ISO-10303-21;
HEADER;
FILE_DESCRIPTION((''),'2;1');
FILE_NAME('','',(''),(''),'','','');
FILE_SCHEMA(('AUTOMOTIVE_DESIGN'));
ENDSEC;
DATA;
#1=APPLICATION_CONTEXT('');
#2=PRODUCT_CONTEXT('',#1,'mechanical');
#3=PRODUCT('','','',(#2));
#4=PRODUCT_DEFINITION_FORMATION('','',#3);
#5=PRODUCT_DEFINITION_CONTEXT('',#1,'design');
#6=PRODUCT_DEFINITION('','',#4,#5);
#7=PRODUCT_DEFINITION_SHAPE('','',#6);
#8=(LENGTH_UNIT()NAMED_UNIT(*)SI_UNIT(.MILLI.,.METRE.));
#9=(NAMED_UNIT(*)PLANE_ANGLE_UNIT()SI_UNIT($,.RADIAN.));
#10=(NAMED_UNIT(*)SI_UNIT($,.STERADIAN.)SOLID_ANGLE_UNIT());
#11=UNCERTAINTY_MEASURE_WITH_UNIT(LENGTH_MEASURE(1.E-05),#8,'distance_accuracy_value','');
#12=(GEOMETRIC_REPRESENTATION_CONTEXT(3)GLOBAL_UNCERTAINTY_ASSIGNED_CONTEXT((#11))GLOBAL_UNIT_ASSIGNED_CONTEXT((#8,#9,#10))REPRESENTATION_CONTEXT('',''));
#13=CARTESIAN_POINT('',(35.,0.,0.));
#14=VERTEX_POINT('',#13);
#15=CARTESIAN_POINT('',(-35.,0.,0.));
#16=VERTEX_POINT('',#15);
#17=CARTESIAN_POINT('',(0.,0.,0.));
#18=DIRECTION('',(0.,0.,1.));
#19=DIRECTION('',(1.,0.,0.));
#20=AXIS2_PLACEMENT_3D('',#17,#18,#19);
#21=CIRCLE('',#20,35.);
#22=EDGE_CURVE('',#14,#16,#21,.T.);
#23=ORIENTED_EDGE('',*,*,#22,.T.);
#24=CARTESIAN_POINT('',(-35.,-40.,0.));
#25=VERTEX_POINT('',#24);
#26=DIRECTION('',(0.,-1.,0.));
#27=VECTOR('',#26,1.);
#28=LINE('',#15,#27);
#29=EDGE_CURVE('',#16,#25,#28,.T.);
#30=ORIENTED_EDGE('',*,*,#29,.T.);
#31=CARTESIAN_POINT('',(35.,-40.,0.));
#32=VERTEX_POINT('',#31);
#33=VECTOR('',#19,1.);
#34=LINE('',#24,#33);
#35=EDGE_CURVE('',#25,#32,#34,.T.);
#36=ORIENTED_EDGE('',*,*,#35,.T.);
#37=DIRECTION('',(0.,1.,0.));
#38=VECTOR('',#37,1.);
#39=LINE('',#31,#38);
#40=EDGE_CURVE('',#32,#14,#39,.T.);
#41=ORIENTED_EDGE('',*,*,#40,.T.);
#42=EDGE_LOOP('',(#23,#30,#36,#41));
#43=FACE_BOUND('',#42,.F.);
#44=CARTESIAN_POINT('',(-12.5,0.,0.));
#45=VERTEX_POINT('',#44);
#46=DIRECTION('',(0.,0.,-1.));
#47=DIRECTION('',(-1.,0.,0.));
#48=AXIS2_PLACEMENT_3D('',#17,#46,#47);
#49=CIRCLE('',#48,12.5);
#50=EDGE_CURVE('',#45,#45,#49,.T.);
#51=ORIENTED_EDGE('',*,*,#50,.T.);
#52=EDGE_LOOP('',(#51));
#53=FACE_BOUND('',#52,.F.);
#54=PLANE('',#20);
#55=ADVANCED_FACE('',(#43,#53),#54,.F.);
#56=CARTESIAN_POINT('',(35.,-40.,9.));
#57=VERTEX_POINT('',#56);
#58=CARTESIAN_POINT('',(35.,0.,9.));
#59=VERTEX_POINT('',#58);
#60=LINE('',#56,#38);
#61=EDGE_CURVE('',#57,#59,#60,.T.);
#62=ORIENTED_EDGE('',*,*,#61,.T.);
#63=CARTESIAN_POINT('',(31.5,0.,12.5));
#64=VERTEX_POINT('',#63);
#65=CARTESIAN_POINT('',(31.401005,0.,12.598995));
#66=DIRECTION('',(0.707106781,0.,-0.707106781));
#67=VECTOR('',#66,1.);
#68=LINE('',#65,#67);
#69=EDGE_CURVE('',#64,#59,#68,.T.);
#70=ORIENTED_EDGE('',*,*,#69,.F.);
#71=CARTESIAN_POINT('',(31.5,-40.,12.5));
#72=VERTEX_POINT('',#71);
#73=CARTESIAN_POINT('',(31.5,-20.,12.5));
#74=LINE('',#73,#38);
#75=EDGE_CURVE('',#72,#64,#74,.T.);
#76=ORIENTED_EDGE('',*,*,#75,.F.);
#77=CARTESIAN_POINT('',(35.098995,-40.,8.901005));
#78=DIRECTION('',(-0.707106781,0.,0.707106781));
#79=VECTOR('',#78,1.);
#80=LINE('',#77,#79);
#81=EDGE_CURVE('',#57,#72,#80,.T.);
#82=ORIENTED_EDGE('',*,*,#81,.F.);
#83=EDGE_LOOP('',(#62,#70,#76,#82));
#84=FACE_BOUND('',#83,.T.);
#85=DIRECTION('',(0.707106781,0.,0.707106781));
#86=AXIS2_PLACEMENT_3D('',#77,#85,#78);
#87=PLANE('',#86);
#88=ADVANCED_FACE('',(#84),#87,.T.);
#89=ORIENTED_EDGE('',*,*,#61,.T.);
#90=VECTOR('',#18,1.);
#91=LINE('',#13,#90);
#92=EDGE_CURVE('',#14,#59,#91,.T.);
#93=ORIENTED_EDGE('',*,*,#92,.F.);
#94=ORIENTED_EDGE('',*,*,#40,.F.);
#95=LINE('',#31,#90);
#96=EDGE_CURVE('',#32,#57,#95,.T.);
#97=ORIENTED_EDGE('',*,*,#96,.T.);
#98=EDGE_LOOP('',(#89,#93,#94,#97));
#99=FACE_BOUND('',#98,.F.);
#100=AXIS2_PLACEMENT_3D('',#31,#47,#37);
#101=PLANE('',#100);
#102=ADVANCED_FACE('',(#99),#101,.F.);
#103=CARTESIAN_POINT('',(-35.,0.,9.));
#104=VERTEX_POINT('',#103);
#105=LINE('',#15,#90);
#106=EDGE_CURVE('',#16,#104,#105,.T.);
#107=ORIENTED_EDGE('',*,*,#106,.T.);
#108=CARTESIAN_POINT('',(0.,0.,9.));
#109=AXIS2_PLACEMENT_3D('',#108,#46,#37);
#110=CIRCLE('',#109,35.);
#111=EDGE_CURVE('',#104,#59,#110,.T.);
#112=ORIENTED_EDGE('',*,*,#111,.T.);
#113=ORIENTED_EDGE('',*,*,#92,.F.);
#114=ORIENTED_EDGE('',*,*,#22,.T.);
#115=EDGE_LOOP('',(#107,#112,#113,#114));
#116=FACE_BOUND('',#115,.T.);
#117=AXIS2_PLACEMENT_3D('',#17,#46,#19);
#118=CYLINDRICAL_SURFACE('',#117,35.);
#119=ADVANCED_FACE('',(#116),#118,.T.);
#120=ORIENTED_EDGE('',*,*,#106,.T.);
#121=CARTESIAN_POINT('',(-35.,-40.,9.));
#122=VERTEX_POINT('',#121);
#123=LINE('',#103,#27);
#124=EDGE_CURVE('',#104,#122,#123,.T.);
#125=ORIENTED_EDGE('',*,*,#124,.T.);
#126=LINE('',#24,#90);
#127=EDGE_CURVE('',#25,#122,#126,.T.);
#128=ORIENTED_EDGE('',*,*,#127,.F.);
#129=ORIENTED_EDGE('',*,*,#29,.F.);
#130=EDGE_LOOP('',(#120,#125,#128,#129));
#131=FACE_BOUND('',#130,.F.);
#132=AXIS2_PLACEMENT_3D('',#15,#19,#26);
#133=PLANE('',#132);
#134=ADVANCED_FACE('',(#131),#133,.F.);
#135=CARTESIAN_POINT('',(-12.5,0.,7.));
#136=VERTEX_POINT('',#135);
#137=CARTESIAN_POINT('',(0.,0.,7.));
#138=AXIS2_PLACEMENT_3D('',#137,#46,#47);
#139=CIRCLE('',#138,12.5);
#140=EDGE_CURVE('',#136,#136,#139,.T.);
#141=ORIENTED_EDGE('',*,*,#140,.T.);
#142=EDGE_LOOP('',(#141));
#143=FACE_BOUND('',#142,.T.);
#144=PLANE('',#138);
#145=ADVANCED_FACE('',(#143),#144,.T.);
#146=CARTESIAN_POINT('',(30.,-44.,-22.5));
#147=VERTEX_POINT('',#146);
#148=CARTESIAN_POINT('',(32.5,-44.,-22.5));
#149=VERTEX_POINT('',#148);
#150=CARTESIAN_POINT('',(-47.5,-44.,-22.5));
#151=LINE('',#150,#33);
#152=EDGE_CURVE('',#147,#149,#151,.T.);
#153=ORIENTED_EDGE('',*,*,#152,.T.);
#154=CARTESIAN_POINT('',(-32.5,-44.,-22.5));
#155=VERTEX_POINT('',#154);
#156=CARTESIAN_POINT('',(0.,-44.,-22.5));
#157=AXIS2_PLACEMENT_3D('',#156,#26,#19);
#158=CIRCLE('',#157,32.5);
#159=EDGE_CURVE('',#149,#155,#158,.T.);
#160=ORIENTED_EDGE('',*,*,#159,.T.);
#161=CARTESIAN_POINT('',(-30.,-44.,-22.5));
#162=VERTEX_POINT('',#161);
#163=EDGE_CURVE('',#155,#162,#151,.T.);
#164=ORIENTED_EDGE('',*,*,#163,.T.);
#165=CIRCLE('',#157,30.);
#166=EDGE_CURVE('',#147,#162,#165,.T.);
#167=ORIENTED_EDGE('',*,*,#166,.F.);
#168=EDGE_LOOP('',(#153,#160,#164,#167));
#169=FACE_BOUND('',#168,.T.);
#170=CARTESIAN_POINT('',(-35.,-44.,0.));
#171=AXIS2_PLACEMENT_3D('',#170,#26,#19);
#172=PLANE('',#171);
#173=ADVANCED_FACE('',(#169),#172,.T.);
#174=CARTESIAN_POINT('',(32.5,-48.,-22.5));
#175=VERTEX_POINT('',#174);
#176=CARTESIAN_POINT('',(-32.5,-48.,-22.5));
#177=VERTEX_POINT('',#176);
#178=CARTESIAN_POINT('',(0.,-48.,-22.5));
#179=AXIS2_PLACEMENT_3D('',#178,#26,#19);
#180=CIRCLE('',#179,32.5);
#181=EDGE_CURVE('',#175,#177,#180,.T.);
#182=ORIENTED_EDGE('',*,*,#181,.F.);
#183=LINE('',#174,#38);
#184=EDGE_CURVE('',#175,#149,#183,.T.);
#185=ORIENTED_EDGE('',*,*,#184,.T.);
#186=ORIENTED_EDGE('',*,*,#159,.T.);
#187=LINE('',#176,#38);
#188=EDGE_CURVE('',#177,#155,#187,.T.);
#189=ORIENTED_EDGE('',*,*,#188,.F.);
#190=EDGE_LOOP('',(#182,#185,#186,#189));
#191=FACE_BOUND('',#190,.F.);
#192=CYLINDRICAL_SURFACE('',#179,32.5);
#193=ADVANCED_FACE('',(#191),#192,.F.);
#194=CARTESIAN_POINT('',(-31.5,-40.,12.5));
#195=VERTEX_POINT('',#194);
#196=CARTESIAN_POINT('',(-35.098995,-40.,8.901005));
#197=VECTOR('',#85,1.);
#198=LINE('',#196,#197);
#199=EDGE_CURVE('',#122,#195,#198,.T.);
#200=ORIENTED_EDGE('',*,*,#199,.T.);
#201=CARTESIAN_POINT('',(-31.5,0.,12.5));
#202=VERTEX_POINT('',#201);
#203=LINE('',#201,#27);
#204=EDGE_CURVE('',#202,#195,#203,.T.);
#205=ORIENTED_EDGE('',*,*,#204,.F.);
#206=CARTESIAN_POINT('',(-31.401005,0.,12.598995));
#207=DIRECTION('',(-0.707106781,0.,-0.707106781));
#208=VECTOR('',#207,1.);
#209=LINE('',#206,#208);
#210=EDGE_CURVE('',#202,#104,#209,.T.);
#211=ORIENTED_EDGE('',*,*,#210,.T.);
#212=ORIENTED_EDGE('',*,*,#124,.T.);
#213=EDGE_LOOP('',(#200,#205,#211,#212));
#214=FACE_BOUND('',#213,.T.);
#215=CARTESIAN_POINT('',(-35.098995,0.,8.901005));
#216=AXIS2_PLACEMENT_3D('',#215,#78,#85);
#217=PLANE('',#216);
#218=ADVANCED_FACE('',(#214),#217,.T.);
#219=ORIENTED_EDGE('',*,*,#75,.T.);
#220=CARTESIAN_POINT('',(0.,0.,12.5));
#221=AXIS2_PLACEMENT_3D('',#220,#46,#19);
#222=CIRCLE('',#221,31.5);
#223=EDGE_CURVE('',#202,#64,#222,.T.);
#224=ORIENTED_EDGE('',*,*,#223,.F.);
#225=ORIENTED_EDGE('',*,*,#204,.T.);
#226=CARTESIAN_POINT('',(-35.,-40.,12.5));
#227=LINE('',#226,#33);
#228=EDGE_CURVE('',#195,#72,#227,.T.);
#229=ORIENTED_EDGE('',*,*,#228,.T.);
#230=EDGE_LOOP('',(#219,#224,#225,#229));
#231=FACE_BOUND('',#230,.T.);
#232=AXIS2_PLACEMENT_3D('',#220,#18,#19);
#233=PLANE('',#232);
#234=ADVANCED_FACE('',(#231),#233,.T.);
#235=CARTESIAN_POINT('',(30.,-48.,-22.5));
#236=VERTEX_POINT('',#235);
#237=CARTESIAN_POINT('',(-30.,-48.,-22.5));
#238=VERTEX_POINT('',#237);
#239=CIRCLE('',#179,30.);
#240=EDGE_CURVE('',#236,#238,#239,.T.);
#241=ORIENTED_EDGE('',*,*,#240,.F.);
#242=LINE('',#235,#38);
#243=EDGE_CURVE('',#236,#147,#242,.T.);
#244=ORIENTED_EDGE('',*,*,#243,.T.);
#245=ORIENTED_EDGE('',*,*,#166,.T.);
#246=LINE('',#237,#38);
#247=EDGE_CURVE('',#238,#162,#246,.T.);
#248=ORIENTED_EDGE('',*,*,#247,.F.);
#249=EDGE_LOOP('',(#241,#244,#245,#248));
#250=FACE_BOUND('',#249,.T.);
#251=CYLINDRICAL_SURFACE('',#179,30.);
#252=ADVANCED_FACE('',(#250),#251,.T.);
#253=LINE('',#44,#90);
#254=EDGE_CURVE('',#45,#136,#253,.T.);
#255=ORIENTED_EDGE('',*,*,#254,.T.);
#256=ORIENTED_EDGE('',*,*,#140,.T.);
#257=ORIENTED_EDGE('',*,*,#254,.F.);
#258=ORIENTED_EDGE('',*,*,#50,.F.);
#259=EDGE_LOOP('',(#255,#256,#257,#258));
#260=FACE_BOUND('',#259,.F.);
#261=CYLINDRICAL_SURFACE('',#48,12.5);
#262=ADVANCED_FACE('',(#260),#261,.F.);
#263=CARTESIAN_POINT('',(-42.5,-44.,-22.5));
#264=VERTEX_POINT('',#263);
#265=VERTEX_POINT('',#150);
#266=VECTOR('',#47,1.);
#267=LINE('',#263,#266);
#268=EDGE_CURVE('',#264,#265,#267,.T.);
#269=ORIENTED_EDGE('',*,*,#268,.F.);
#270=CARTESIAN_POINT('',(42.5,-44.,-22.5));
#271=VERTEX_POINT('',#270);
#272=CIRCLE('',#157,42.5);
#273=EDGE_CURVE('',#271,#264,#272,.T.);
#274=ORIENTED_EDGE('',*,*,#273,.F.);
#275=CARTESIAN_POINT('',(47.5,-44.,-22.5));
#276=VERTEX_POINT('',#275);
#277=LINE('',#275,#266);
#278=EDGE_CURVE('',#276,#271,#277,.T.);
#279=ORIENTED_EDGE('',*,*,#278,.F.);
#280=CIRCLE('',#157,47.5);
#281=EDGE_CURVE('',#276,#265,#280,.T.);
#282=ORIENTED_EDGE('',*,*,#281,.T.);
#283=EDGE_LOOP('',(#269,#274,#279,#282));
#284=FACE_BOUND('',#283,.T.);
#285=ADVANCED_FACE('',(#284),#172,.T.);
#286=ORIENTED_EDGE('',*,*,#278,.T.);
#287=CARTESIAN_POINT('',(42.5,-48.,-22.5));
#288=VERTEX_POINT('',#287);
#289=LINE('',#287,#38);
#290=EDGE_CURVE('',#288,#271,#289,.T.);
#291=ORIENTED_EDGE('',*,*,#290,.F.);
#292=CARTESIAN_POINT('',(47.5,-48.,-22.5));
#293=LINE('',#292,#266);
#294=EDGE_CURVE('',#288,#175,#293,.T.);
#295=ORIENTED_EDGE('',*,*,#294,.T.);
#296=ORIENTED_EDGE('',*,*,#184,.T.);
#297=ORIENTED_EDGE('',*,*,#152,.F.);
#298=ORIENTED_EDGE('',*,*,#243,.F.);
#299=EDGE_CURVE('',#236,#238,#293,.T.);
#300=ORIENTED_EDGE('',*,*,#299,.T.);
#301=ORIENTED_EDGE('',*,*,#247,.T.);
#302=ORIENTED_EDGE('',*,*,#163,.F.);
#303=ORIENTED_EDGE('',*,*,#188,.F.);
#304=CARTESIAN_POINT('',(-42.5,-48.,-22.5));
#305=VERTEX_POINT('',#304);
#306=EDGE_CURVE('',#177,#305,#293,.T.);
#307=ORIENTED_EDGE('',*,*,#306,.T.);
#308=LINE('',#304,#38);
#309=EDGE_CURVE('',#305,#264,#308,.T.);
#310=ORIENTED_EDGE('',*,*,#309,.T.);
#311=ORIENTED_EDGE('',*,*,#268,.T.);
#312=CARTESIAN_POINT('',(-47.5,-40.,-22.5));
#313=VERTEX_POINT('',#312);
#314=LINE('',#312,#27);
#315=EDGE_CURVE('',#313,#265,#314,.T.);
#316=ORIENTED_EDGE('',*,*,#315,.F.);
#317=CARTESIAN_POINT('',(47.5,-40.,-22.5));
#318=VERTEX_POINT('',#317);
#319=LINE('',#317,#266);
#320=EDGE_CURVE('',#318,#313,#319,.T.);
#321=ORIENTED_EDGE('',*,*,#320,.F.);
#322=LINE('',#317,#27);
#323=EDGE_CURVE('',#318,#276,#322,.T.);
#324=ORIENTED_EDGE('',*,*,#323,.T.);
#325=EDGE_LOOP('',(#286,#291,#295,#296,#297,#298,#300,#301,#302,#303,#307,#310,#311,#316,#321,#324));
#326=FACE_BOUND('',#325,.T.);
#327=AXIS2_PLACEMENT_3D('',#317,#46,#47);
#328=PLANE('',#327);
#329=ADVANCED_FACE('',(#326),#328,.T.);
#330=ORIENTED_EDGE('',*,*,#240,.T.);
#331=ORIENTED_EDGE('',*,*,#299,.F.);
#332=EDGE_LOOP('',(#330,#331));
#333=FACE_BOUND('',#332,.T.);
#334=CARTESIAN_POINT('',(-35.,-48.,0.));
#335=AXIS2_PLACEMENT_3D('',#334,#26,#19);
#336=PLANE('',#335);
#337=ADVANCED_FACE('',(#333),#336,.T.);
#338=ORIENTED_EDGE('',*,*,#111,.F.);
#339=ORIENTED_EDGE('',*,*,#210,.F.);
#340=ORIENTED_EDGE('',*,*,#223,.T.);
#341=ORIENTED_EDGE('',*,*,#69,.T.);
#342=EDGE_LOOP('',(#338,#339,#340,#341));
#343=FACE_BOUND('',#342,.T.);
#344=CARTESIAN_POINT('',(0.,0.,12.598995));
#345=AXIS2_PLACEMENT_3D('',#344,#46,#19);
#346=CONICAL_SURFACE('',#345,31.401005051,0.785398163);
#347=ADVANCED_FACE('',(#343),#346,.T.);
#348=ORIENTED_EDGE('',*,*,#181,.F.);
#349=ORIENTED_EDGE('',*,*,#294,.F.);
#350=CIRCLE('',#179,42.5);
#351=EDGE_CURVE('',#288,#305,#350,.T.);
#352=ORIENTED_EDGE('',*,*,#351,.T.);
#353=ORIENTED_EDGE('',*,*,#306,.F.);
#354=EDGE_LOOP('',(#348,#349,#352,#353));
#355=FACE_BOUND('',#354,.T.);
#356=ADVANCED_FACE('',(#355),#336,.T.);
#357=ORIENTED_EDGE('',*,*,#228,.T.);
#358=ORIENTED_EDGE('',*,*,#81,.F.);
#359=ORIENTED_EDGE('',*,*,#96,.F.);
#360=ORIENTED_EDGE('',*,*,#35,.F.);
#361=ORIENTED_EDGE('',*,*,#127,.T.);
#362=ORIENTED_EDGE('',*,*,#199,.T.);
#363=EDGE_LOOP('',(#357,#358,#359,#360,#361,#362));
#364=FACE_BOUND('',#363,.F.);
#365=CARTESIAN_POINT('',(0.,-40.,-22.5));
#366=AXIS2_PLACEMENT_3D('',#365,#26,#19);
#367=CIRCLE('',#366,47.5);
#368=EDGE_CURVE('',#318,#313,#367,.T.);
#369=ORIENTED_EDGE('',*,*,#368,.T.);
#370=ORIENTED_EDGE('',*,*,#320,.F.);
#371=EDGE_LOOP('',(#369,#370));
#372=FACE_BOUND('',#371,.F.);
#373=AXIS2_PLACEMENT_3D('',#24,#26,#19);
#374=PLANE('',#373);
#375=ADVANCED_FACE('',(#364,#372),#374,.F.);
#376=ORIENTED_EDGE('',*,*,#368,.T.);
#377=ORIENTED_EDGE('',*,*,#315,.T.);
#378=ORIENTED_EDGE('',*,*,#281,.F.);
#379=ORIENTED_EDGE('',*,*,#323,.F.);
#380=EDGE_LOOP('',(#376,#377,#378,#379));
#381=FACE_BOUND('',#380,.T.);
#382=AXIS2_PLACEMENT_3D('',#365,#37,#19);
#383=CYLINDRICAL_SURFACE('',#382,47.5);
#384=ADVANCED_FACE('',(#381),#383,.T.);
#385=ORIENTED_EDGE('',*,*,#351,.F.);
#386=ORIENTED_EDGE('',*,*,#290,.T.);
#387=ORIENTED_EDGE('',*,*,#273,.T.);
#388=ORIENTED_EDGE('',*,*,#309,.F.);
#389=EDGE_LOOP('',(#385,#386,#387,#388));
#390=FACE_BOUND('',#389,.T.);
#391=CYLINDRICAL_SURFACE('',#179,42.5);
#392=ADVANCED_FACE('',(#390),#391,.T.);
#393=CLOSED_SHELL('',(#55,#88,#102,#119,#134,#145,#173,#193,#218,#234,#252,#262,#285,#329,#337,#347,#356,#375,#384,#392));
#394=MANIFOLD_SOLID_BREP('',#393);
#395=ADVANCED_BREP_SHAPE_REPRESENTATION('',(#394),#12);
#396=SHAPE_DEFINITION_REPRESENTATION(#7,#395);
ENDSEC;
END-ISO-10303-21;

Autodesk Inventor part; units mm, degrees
ref_plane "YZ Plane" through (0, 0, 0) normal (1, 0, 0) x (0, 1, 0)
ref_plane "XZ Plane" through (0, 0, 0) normal (0, 1, 0) x (-1, 0, 0)
ref_plane "XY Plane" through (0, 0, 0) normal (0, 0, 1) x (1, 0, 0)
sketch "Sketch1" plane through (0, 0, 0) normal (0, 0, 1) x (1, 0, 0)
  circle A0 centre (0, 0) radius 35
  line L0 (-35, 0) -> (-35, -40)
  line L1 (-35, -40) -> (35, -40)
  line L2 (35, -40) -> (35, 0)
  dimension "d0" = 70
  dimension "d1" = 40
extrude "Extrusion1" add sketch "Sketch1" along normal blind 12.5
sketch "Sketch2" plane through (-35, -40, 0) normal (0, -1, 0) x (1, 0, 0)
  arc A0 (82.5, -22.5) -> (-12.5, -22.5) centre (35, -22.5) ccw
  line L0 (0, 12.5) -> (70, 12.5) construction
  line L1 (35, 12.5) -> (35, 0)
  line L2 (82.5, -22.5) -> (-12.5, -22.5)
  arc A1 (-12.5, -22.5) -> (82.5, -22.5) centre (35, -22.5) ccw construction
  dimension "d4" = 95
  dimension "d6" = 35
extrude "Extrusion2" add sketch "Sketch2" along normal blind 8
chamfer "Chamfer1" distance 3.5 angle 45 3 edges at (0, 35, 12.5) (-35, -20, 12.5) (35, -20, 12.5)
sketch "Sketch3" plane through (0, 0, 0) normal (0, 0, -1) x (-1, 0, 0)
  circle A0 centre (0, 0) radius 12.5
  dimension "d12" = 25
extrude "Extrusion3" cut sketch "Sketch3" against normal blind 7
sketch "Sketch4" plane through (-35, -48, 0) normal (0, -1, 0) x (1, 0, 0)
  arc A0 (82.5, -22.5) -> (-12.5, -22.5) centre (35, -22.5) ccw projected
  arc A1 (77.5, -22.5) -> (-7.5, -22.5) centre (35, -22.5) ccw
  arc A2 (82.5, -22.5) -> (-12.5, -22.5) centre (35, -22.5) ccw projected
  line L0 (-7.5, -22.5) -> (-12.5, -22.5)
  line L1 (82.5, -22.5) -> (77.5, -22.5)
  line L2 (-12.5, -22.5) -> (82.5, -22.5) projected
  circle A3 centre (35, -22.5) radius 32.5
  circle A4 centre (35, -22.5) radius 30
  point P0 (35, 0)
  point P1 (5, -22.5)
  point P2 (65, -22.5)
  point P3 (67.5, -22.5)
  point P4 (2.5, -22.5)
  dimension "d16" = 5
  dimension "d20" = 65
  dimension "d21" = 60
extrude "Extrusion4" cut sketch "Sketch4" against normal blind 4 contours L1 A1 L0 A0 | L2 A4 A3 picked at (43.6934, 7.7339)
properties part number "Base 1 left"
